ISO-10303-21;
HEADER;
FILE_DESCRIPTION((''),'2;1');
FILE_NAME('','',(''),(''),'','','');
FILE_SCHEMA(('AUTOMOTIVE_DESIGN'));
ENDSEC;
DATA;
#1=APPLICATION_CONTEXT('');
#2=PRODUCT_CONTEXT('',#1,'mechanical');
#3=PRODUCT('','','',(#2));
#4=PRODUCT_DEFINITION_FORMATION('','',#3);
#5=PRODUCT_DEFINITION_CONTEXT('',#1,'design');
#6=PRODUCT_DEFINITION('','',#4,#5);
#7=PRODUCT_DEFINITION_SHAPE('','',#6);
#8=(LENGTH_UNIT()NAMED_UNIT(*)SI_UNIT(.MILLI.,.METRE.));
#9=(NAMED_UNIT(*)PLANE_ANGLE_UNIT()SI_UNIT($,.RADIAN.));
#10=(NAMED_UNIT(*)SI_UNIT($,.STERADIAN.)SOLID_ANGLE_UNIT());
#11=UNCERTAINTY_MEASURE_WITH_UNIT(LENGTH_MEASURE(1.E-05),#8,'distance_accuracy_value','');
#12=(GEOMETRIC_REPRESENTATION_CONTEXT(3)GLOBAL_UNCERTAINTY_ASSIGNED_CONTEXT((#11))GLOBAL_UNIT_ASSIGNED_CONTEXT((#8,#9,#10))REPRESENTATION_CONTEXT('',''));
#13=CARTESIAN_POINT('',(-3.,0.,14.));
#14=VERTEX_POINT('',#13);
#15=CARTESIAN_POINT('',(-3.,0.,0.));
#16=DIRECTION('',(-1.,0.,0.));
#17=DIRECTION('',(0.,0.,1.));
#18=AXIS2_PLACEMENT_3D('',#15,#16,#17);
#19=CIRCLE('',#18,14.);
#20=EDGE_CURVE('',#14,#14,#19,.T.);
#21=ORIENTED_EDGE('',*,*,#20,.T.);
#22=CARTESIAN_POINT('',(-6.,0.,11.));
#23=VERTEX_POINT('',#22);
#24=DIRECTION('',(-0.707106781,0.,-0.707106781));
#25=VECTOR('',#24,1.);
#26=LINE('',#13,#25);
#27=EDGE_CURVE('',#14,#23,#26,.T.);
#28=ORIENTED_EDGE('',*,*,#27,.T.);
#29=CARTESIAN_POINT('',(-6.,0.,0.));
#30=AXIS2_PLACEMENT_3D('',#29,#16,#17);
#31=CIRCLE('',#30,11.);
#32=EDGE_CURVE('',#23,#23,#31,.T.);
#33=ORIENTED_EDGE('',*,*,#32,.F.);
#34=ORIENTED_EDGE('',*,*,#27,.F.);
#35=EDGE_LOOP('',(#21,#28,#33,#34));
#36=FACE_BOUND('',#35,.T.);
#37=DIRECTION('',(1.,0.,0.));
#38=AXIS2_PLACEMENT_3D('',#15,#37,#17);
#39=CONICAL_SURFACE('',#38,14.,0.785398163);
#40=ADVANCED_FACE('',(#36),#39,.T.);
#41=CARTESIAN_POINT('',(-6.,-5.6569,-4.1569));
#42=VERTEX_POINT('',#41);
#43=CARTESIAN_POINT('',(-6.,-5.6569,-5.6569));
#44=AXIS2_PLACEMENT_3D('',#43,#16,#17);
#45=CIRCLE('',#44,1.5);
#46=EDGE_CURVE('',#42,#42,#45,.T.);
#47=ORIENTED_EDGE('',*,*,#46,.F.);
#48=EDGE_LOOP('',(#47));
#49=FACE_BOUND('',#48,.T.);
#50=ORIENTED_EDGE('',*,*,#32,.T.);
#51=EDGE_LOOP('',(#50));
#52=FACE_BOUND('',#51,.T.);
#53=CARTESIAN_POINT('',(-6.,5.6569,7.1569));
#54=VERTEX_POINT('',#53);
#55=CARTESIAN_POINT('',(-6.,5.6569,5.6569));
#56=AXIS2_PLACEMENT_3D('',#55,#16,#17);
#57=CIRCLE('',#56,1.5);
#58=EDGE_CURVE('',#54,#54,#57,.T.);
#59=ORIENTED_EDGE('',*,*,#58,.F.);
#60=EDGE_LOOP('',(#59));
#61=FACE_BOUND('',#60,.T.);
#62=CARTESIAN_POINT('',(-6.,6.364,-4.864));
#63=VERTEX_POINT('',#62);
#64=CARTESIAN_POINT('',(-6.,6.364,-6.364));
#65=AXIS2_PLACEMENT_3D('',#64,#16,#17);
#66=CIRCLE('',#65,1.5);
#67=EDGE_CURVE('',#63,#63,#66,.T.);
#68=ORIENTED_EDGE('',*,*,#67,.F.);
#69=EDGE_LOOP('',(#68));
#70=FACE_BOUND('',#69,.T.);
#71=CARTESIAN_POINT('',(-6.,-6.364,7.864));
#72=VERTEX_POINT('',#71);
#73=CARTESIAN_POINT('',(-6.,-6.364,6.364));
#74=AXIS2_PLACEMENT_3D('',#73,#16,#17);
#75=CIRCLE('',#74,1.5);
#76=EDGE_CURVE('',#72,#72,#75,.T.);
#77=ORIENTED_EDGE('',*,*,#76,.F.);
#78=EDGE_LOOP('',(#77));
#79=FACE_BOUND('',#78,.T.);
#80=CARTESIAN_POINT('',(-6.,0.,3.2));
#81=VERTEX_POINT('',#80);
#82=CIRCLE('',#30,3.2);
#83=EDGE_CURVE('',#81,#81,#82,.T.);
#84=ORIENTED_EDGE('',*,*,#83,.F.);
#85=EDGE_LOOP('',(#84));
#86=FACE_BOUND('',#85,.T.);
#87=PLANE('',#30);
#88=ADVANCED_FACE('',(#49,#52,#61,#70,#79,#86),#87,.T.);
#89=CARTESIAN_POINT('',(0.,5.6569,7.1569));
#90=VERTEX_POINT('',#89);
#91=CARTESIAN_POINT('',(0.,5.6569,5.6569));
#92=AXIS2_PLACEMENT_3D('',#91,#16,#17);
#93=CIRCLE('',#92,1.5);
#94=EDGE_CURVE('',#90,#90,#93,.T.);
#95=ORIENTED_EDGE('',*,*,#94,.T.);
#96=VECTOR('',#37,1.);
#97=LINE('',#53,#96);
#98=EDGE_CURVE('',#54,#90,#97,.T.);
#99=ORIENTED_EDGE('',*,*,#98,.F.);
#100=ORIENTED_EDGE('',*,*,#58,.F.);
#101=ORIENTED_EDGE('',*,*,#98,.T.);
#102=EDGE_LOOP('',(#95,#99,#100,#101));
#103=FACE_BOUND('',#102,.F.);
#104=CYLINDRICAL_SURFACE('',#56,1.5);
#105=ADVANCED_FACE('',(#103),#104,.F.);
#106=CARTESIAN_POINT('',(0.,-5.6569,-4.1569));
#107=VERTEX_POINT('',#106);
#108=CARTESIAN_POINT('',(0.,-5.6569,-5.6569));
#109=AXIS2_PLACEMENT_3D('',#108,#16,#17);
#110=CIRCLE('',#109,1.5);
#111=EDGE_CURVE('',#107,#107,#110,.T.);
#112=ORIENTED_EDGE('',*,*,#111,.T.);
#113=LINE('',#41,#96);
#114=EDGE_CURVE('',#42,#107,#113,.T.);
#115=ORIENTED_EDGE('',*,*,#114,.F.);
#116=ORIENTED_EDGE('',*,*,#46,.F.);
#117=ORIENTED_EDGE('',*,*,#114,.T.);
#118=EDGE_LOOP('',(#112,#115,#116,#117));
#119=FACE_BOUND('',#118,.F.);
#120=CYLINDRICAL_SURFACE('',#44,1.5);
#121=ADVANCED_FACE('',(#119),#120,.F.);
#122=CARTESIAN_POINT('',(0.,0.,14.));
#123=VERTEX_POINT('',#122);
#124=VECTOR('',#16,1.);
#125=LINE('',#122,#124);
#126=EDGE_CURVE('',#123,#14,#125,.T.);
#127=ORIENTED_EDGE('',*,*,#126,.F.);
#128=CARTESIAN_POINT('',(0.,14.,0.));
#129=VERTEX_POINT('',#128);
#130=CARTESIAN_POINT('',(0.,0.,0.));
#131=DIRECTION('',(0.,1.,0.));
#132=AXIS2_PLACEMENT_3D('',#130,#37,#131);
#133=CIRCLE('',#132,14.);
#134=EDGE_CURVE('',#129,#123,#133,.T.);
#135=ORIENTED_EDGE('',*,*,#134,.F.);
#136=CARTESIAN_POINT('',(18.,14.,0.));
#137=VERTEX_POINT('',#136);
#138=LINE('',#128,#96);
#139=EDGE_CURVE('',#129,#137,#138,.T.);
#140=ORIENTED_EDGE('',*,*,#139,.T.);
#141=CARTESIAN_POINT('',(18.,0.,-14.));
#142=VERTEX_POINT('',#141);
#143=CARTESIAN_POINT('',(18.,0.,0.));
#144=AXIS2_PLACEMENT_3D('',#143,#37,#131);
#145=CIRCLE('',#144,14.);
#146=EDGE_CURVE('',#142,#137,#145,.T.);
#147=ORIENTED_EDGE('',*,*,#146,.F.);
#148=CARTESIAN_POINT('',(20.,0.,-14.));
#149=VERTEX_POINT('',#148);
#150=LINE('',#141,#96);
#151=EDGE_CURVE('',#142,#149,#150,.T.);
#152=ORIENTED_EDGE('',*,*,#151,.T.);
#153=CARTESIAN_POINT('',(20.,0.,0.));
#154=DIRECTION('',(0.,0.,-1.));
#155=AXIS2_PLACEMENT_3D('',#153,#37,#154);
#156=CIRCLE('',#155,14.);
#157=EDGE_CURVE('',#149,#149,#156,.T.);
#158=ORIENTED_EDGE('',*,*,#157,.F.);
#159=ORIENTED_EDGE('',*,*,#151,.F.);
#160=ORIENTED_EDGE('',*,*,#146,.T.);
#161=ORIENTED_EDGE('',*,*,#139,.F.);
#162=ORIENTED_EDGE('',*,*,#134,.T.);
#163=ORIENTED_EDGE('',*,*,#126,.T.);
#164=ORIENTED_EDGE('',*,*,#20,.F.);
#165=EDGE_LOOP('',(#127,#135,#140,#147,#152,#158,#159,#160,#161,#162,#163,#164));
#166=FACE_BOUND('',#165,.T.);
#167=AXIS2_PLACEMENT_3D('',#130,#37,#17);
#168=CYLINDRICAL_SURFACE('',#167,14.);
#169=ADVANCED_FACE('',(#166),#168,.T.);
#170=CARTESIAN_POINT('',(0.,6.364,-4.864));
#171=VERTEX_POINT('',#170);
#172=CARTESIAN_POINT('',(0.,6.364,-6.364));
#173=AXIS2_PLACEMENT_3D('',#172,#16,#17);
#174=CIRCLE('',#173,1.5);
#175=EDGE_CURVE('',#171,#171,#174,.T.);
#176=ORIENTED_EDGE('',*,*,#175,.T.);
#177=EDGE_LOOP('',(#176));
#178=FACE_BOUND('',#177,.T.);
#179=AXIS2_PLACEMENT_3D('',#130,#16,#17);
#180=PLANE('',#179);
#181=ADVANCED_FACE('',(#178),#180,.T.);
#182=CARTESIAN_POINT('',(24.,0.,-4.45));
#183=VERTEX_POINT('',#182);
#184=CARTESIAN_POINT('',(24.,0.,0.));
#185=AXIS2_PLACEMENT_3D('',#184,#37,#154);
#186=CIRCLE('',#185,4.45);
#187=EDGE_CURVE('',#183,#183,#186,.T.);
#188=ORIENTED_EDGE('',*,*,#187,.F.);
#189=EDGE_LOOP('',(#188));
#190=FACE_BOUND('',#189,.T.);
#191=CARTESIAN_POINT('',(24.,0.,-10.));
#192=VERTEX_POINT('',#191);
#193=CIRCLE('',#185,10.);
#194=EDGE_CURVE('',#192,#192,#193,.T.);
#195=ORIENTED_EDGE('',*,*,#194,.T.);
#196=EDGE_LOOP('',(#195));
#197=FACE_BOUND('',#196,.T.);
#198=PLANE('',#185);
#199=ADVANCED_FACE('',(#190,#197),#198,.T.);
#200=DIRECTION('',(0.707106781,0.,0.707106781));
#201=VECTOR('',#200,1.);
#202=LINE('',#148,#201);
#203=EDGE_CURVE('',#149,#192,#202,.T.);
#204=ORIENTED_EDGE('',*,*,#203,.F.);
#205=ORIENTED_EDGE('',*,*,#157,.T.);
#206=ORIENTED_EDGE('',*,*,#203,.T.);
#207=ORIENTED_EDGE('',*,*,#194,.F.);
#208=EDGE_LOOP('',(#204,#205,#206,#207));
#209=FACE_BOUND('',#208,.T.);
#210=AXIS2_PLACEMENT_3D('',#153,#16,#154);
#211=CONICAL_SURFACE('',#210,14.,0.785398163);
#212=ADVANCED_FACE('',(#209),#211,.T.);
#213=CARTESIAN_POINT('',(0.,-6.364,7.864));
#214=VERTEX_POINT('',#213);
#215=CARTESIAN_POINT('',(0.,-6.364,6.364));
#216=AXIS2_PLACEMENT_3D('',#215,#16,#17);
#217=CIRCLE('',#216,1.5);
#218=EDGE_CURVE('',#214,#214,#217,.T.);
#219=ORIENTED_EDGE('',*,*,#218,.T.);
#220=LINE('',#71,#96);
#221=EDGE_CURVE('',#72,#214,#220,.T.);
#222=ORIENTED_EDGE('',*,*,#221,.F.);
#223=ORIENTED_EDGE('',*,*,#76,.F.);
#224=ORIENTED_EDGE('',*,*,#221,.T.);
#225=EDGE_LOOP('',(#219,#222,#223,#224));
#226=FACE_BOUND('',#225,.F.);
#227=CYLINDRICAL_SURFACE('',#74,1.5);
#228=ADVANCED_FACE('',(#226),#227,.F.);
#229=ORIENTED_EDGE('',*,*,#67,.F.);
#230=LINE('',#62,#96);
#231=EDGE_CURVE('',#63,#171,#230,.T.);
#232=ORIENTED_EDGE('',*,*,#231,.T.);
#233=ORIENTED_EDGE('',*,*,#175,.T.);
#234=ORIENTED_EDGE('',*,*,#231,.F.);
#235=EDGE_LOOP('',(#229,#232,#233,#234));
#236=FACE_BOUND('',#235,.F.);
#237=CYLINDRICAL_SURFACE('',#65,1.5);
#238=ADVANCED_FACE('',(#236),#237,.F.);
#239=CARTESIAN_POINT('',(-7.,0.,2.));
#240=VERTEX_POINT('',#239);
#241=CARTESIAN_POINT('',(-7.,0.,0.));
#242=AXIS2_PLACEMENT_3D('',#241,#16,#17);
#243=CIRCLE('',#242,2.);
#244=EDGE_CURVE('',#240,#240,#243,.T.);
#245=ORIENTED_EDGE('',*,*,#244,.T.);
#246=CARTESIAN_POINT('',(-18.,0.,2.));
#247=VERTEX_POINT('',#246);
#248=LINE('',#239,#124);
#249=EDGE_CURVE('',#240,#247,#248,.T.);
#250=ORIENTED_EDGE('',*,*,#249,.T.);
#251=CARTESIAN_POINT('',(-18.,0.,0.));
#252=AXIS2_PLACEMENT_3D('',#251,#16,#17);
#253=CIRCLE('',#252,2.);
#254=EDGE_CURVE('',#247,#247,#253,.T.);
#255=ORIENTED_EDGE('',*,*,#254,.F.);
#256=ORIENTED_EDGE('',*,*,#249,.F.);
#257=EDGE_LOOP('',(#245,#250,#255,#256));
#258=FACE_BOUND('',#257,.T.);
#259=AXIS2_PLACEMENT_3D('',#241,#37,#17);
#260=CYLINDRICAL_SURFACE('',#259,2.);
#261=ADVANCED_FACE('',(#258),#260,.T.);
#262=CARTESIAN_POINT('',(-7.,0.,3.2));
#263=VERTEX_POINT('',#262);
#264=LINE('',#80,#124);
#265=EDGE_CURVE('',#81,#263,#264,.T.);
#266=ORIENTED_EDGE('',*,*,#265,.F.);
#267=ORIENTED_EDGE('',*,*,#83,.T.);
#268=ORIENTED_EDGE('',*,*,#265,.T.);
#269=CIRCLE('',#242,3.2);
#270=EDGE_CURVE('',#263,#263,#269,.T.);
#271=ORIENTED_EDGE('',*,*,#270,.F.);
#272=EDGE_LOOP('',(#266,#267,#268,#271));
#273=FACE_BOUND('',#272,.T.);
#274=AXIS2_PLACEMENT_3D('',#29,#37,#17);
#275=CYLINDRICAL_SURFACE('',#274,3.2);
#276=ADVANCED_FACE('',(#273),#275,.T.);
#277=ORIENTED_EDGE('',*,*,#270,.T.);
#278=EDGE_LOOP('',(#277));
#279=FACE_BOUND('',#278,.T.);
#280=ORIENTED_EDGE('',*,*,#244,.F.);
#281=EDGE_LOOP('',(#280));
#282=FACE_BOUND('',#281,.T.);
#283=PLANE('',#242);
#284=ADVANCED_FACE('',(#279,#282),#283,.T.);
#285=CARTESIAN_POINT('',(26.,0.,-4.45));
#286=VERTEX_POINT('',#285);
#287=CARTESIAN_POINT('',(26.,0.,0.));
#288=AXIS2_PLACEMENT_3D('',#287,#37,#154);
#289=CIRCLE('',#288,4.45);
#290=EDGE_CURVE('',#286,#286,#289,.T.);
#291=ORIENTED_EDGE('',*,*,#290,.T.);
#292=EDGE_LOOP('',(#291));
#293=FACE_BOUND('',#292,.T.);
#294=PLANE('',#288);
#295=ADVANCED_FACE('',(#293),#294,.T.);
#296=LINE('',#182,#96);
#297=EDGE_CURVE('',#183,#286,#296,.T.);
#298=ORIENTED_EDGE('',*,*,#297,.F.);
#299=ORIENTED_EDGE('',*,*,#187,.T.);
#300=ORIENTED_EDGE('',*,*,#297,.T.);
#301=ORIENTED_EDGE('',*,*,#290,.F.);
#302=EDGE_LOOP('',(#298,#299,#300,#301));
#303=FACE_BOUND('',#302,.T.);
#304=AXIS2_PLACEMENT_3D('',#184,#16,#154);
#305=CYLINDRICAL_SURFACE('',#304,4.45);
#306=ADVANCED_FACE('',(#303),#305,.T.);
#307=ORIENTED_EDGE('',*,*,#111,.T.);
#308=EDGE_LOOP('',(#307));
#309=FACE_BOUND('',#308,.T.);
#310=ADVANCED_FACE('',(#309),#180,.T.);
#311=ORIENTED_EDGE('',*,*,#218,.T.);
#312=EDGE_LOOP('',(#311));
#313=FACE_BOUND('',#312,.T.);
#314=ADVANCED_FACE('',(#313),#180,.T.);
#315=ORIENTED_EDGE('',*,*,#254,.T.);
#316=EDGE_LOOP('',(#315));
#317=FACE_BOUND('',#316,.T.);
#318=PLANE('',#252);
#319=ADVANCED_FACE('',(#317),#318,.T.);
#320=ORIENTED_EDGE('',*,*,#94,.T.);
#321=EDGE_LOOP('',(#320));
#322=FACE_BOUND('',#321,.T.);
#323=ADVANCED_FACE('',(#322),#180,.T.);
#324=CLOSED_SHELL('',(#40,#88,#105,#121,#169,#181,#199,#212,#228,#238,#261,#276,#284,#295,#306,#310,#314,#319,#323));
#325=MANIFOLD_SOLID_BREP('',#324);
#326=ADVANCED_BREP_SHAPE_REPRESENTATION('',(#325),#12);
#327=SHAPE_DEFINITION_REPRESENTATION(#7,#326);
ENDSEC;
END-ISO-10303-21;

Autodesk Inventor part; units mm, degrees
ref_plane "YZ Plane" through (0, 0, 0) normal (1, 0, 0) x (0, 1, 0)
ref_plane "XZ Plane" through (0, 0, 0) normal (0, 1, 0) x (-1, 0, 0)
ref_plane "XY Plane" through (0, 0, 0) normal (0, 0, 1) x (1, 0, 0)
sketch "Эскиз1" plane through (0, 0, 0) normal (1, 0, 0) x (0, 1, 0)
  circle A0 centre (0, 0) radius 14
  dimension "d0" = 28
extrude "Выдавливание1" add sketch "Эскиз1" along normal blind 18
sketch "Эскиз2" plane through (18, 0, 0) normal (1, 0, 0) x (0, 0, -1)
  circle A0 centre (0, 0) radius 14
  dimension "d3" = 28
extrude "Выдавливание2" add sketch "Эскиз2" along normal blind 6
chamfer "Фаска1" distance 4 angle 45 1 edges at (24, 0, 14)
sketch "Эскиз3" plane through (24, 0, 0) normal (1, 0, 0) x (0, 0, -1)
  circle A0 centre (0, 0) radius 4.45
  dimension "d9" = 8.9
extrude "Выдавливание3" add sketch "Эскиз3" along normal blind 2
sketch "Эскиз4" plane through (0, 0, 0) normal (-1, 0, 0) x (0, 0, 1)
  circle A0 centre (0, 0) radius 14
  dimension "d12" = 28
extrude "Выдавливание4" add sketch "Эскиз4" along normal blind 6
chamfer "Фаска2" distance 3 angle 45 1 edges at (-6, 0, -14)
sketch "Эскиз5" plane through (-6, 0, 0) normal (-1, 0, 0) x (0, 0, 1)
  circle A0 centre (0, 0) radius 3.2
  dimension "d18" = 6.4
extrude "Выдавливание5" add sketch "Эскиз5" along normal blind 1
sketch "Эскиз6" plane through (-7, 0, 0) normal (-1, 0, 0) x (0, 0, 1)
  circle A0 centre (0, 0) radius 2
  dimension "d21" = 4
extrude "Выдавливание6" add sketch "Эскиз6" along normal blind 11
sketch "Эскиз7" plane through (-6, 0, 0) normal (-1, 0, 0) x (0, 0, 1)
  circle A0 centre (5.6569, 5.6569) radius 1.5
  line L0 (0, 0) -> (14, 0) construction
  circle A1 centre (0, 0) radius 14 construction
  line L1 (0, 0) -> (0, 14) construction
  line L2 (-4.7873, -4.7873) -> (5.6569, 5.6569) construction
  circle A2 centre (0, 0) radius 2 construction
  line L3 (-6.364, 6.364) -> (6.364, -6.364) construction
  circle A3 centre (-6.364, 6.364) radius 1.5
  circle A4 centre (6.364, -6.364) radius 1.5
  circle A5 centre (-5.6569, -5.6569) radius 1.5
  circle A6 centre (0, 0) radius 14 construction
  dimension "d24" = 3
  dimension "d29" = 45
  dimension "d30" = 3
  dimension "d31" = 16
  dimension "d32" = 18
extrude "Выдавливание7" cut sketch "Эскиз7" against normal blind 6
properties part number "motor_sketch"
